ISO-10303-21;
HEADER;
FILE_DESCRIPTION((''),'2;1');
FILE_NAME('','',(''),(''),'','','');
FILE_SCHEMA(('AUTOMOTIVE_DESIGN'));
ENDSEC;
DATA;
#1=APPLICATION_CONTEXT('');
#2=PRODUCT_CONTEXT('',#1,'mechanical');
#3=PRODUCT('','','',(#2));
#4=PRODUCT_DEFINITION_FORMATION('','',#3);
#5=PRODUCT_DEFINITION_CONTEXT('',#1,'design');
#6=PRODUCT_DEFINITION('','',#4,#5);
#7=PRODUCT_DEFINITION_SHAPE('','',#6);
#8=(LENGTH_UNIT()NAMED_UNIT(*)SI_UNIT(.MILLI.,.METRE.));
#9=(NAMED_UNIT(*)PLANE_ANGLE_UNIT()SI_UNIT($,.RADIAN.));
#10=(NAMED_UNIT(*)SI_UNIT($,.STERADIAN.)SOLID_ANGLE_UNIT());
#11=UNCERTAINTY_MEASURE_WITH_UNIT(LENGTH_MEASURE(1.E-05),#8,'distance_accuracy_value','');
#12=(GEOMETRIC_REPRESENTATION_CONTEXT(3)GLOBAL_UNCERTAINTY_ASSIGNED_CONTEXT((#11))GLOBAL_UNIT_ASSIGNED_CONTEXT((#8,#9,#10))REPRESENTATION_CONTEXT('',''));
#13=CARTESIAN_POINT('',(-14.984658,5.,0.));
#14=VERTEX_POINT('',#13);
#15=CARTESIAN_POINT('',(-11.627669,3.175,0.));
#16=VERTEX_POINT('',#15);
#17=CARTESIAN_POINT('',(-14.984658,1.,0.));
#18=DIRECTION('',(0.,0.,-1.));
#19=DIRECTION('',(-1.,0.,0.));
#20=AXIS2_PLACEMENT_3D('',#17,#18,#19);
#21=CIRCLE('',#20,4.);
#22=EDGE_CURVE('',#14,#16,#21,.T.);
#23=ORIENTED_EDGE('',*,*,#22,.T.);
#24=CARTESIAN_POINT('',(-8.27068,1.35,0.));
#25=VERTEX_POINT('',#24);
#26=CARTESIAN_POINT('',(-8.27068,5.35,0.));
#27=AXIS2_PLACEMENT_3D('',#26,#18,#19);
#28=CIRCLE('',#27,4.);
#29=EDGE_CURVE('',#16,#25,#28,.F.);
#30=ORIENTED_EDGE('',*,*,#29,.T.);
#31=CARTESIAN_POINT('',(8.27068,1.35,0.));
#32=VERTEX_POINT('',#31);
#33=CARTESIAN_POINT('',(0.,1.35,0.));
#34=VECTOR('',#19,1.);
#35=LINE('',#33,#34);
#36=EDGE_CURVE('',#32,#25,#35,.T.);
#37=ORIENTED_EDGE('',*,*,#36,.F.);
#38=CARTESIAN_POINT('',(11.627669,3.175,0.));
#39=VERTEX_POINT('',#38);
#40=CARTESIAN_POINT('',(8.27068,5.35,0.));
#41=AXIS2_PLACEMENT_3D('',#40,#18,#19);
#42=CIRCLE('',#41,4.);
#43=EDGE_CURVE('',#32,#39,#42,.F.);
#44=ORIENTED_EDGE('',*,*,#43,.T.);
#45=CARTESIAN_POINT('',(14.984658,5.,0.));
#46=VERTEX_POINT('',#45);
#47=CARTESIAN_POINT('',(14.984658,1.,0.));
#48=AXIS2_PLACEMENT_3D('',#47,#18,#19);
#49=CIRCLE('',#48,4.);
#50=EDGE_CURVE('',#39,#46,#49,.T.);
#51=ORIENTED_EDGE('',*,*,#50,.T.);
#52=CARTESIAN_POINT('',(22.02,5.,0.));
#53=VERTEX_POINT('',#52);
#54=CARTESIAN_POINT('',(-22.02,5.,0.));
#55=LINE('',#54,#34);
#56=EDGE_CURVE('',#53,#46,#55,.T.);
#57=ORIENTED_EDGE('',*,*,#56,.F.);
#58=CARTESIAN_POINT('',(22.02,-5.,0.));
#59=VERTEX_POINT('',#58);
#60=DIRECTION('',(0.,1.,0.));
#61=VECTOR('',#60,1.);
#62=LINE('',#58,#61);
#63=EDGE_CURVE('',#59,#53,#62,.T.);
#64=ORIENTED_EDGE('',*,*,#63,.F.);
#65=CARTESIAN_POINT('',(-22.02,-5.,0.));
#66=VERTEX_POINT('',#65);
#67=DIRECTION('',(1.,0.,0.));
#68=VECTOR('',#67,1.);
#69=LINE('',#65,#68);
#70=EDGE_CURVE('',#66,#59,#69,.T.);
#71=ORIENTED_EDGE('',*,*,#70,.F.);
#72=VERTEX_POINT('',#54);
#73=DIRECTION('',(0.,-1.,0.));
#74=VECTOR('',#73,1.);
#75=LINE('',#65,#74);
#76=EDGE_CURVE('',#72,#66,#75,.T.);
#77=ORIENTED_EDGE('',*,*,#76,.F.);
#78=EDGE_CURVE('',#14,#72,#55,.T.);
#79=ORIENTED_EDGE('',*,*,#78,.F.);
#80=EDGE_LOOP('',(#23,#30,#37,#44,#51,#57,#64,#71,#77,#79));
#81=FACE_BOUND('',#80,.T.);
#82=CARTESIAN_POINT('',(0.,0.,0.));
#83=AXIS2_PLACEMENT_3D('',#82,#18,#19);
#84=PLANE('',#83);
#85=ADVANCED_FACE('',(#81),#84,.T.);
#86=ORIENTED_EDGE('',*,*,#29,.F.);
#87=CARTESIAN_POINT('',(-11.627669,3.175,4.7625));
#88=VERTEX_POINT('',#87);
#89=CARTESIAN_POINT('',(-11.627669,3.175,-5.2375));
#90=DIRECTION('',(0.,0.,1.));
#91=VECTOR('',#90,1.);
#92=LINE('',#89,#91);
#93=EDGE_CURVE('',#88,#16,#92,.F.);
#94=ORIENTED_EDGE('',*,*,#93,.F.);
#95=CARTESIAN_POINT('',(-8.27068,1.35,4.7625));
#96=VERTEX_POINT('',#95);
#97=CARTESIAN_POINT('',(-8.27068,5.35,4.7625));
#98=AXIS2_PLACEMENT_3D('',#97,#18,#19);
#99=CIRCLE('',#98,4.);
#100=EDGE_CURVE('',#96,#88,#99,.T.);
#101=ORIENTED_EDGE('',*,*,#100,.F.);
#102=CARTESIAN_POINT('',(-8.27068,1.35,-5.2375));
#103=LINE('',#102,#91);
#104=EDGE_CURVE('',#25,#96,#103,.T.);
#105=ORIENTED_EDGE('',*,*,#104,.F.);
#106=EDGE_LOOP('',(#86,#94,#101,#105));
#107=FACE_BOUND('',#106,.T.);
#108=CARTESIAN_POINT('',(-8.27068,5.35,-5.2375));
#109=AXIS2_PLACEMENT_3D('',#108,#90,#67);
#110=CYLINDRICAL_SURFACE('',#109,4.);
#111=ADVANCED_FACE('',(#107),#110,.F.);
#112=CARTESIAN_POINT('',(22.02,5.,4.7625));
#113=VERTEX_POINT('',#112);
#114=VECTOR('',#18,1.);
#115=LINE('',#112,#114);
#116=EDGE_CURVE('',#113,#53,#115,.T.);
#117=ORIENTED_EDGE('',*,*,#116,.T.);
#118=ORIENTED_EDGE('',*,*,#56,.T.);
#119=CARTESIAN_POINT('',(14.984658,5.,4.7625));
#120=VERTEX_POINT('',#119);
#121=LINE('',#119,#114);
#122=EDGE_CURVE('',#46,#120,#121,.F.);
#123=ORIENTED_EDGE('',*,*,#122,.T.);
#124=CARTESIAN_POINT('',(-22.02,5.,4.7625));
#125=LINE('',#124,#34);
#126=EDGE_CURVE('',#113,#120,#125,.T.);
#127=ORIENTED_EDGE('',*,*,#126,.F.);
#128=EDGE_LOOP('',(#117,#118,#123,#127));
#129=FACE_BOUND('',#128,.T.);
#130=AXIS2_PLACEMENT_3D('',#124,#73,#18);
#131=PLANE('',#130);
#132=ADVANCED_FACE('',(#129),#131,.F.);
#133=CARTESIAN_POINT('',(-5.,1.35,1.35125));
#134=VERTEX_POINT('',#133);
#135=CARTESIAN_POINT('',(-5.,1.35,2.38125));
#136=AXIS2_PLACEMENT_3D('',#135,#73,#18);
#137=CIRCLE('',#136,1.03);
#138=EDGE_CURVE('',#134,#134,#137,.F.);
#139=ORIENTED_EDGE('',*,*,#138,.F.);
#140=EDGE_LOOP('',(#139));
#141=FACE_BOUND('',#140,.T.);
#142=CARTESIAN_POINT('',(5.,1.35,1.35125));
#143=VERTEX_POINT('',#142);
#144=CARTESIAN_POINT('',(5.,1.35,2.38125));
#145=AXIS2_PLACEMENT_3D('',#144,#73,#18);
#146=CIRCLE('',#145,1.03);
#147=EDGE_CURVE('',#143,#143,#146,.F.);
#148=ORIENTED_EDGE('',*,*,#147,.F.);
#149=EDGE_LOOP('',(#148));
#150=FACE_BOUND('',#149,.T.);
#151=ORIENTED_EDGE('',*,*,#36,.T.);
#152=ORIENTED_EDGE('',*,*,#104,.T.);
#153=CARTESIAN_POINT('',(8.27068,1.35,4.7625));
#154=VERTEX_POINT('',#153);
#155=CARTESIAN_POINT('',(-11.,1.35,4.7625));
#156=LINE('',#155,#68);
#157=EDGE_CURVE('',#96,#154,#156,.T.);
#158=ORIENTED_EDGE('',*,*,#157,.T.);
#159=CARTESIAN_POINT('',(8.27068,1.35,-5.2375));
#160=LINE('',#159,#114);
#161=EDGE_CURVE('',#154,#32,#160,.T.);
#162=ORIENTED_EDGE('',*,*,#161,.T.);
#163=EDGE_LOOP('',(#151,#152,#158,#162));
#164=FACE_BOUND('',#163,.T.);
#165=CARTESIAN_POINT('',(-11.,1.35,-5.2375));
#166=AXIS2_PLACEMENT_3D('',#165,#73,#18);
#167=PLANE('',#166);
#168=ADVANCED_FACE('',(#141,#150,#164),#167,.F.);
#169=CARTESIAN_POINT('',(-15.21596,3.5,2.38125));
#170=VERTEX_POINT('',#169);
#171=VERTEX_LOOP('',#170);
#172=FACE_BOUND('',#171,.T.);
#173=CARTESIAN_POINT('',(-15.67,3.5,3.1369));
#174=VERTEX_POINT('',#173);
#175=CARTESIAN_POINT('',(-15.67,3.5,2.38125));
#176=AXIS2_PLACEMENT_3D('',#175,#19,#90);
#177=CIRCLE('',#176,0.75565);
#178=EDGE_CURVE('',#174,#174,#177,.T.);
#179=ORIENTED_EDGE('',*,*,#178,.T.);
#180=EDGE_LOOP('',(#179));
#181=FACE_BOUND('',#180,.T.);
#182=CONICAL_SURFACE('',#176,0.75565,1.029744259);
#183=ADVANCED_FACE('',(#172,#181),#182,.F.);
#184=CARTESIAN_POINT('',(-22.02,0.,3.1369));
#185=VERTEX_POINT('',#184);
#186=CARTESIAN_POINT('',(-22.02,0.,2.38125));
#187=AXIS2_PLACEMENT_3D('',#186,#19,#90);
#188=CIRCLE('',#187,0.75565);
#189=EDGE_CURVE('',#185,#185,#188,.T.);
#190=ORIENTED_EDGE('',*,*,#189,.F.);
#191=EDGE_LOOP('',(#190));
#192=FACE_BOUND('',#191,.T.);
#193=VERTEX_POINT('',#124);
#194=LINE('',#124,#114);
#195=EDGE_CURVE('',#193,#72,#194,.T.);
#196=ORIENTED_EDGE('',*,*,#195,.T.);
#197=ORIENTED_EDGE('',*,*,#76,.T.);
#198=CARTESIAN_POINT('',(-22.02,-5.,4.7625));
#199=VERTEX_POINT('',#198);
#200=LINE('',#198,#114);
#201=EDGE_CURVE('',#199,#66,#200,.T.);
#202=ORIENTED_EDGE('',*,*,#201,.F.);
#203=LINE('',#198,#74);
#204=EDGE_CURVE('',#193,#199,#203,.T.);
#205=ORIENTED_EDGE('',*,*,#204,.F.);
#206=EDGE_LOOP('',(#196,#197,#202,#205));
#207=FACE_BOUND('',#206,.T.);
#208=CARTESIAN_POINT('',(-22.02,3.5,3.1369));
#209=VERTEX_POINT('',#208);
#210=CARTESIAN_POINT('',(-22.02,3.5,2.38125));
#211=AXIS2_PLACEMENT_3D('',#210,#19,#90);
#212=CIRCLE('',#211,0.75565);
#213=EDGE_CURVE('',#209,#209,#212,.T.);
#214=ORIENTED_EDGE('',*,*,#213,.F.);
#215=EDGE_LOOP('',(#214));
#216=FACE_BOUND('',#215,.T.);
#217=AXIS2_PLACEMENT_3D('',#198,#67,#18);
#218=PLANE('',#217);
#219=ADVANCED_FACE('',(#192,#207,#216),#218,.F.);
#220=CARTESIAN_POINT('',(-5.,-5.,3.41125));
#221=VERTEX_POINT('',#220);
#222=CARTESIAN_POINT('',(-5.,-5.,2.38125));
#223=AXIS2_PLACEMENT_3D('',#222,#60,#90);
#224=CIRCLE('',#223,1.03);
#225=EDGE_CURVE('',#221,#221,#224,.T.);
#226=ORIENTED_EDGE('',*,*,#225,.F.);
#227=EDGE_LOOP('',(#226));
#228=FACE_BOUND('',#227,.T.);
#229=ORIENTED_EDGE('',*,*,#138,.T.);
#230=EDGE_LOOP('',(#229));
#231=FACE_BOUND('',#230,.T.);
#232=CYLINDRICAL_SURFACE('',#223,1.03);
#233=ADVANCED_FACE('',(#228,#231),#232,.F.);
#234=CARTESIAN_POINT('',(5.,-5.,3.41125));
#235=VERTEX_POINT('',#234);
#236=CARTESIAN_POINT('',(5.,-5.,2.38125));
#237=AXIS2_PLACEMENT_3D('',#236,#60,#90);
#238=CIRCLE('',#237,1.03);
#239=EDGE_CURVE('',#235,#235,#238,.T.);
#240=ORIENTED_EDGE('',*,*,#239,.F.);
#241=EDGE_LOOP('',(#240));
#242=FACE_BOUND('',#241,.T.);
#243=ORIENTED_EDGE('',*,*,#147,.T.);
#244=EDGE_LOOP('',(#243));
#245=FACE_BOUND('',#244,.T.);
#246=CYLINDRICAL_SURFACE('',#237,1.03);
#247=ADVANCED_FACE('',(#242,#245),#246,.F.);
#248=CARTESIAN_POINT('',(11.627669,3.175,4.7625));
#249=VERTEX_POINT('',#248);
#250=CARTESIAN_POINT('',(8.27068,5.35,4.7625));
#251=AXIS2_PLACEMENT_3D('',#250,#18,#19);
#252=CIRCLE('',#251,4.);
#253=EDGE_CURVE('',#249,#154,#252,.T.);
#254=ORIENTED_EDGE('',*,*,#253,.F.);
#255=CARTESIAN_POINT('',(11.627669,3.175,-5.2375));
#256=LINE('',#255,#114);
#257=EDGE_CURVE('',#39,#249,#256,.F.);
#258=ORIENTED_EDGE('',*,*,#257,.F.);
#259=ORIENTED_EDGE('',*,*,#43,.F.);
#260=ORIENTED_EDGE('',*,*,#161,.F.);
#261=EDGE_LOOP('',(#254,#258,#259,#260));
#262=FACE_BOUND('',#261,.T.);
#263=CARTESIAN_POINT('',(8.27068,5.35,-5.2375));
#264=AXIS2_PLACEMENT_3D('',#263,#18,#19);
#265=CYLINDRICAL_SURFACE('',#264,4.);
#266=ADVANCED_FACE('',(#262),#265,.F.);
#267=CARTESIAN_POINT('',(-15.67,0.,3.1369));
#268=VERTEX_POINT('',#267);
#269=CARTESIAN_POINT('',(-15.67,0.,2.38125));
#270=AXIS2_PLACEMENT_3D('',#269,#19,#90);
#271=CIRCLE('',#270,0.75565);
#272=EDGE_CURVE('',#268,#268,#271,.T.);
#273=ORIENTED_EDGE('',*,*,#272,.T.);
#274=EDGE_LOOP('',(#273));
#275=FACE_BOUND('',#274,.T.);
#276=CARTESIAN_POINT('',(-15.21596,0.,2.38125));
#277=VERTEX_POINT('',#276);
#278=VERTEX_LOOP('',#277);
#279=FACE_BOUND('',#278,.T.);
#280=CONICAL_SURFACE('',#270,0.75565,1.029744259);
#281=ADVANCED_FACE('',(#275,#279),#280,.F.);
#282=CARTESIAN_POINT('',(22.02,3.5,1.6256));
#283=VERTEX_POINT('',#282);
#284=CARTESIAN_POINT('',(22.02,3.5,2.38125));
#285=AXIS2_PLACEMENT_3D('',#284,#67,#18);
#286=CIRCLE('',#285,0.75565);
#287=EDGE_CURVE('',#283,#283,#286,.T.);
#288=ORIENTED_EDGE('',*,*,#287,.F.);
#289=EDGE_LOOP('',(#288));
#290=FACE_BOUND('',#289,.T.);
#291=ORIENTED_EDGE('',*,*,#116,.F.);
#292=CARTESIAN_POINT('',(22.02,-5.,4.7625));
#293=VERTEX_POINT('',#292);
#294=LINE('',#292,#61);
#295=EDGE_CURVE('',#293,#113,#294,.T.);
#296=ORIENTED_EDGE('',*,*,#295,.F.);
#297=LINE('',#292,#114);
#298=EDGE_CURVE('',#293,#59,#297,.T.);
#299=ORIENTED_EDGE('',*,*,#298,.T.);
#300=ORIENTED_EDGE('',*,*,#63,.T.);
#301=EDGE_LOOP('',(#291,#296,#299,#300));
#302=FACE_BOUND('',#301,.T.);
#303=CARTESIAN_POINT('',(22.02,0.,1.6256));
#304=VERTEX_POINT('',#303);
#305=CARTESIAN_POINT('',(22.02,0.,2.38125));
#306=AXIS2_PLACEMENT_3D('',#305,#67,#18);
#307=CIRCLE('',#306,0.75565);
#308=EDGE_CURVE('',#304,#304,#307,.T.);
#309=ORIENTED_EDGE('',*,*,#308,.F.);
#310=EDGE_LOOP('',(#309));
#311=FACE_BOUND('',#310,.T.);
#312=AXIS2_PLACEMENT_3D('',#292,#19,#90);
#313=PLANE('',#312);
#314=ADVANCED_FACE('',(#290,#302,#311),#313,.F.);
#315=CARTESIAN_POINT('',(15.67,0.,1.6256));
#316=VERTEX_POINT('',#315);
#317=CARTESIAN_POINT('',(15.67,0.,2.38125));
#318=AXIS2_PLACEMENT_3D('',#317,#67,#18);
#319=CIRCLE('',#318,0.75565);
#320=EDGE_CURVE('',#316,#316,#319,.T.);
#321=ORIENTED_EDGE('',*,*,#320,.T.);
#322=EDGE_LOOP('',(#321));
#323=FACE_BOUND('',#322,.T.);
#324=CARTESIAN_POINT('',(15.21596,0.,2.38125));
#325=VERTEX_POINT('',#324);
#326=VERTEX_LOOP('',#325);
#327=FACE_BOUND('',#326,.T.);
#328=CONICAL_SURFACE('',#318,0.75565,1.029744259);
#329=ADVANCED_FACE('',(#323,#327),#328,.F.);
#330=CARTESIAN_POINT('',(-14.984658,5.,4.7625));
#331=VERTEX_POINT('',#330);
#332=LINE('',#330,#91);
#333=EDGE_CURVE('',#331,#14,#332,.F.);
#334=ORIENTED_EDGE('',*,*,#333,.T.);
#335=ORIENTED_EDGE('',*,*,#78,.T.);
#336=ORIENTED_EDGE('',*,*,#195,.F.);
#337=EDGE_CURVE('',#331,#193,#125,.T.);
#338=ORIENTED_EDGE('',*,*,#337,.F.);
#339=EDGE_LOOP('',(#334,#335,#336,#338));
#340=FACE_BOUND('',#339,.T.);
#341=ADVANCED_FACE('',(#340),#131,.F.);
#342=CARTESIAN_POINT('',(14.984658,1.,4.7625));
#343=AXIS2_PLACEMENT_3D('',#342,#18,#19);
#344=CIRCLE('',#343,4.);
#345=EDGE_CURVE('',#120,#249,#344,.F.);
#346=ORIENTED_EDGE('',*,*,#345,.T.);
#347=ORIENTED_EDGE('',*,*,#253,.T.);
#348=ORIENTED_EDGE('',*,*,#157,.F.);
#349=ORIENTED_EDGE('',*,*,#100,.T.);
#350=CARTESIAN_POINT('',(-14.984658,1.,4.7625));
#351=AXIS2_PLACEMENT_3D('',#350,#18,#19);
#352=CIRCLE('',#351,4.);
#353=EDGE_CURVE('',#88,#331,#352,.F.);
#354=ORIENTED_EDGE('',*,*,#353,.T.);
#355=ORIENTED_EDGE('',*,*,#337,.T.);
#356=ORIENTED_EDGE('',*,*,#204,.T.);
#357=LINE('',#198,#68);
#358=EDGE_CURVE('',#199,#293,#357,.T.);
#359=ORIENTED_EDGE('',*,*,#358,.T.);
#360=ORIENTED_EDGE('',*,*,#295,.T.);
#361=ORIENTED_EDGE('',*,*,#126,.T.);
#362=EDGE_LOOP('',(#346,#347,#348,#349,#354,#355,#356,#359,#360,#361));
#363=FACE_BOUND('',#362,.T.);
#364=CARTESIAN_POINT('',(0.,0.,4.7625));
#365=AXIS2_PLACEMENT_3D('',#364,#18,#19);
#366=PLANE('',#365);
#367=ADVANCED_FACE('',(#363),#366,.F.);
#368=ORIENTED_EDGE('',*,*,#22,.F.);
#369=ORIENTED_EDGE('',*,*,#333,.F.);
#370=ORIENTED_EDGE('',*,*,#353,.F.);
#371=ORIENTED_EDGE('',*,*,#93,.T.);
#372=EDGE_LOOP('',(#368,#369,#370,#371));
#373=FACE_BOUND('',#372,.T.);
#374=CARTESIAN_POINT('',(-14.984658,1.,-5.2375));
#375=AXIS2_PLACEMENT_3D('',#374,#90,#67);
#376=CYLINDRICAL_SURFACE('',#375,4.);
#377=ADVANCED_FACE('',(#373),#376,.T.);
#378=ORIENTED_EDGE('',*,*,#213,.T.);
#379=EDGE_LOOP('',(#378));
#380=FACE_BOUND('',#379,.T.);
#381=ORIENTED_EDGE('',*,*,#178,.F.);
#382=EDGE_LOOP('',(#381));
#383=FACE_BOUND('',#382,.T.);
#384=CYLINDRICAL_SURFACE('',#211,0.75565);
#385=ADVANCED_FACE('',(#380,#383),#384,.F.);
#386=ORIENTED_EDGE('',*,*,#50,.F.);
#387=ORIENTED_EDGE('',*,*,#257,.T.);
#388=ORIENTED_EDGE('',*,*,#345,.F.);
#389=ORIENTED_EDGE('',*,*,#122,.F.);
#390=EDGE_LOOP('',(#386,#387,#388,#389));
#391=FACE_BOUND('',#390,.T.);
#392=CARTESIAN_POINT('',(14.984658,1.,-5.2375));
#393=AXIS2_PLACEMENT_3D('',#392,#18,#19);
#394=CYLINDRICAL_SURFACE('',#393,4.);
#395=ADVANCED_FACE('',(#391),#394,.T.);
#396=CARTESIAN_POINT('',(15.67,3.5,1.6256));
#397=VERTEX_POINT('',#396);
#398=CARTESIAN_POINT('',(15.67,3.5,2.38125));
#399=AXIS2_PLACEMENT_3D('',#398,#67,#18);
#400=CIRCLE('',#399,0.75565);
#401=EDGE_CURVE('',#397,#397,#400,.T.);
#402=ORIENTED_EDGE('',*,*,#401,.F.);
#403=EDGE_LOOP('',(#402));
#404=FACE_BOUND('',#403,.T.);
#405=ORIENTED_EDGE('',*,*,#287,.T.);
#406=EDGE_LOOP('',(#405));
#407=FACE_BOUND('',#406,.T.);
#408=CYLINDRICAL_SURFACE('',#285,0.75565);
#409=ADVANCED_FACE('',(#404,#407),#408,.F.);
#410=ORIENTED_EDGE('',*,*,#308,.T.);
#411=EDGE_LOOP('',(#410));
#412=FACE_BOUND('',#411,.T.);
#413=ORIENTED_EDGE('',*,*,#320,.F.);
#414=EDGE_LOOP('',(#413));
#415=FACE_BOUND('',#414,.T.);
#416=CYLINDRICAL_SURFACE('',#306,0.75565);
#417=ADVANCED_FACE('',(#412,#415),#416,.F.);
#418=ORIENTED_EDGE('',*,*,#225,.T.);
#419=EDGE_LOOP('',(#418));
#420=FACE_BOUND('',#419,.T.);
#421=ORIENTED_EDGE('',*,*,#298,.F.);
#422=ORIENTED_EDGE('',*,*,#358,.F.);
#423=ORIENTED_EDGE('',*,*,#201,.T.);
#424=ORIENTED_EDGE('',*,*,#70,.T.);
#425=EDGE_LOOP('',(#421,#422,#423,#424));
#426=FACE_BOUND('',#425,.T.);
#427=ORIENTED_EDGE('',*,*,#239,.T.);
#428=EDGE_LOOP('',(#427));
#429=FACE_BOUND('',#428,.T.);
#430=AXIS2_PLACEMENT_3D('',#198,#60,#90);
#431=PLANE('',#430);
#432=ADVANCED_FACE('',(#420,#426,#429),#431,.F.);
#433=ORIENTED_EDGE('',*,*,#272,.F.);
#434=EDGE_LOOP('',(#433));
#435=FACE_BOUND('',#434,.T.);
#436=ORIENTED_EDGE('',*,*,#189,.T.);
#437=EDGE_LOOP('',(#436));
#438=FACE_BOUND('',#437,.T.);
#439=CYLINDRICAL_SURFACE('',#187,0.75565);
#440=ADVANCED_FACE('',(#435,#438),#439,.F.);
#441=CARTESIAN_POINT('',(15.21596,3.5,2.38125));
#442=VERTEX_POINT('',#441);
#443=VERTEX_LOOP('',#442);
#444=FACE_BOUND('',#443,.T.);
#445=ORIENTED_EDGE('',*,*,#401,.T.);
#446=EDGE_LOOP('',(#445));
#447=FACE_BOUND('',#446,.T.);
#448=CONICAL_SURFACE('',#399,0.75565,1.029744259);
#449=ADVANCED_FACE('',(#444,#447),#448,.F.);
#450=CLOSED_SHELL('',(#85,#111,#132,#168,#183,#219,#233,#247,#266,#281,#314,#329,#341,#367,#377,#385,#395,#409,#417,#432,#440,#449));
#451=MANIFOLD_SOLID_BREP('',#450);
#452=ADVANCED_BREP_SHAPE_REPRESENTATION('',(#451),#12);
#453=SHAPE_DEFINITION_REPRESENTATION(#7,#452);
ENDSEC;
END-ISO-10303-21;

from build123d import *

# Parameters (mm, degrees)
SKETCH1_W                 = 44.04
SKETCH1_H                 = 10
BOSS_EXTRUDE1_DEPTH       = 4.7625
SKETCH2_R                 = 1.03
CUT_EXTRUDE1_DEPTH        = 25.648768859
F_1_64_TAPPED_HOLE1_D     = 1.5113
F_1_64_TAPPED_HOLE1_DEPTH = 6.35
F_1_64_TAPPED_HOLE1_TIP   = 0.454040327
F_1_64_TAPPED_HOLE2_D     = 1.5113
F_1_64_TAPPED_HOLE2_DEPTH = 6.35
F_1_64_TAPPED_HOLE2_TIP   = 0.454040327
SKETCH7_W                 = 22
SKETCH7_H                 = 3.65
CUT_EXTRUDE2_DEPTH        = 10
FILLET1_R                 = 4
FILLET2_R                 = 4


with BuildPart() as part:
    # Sketch1 → Boss-Extrude1 (new body)
    with BuildSketch(Plane.XY):
        Rectangle(SKETCH1_W, SKETCH1_H)
    extrude(amount=BOSS_EXTRUDE1_DEPTH)

    # Sketch2 → Cut-Extrude1 (cut, through all)
    with BuildSketch(Plane(origin=(0, 5, 0), x_dir=(1, 0, 0), z_dir=(0, 1, 0))):
        with Locations(Location((-5, -2.38125, 0), (0, 0, 270))):
            Circle(SKETCH2_R)
        with Locations(Location((5, -2.38125, 0), (0, 0, 270))):
            Circle(SKETCH2_R)
    extrude(amount=-CUT_EXTRUDE1_DEPTH, mode=Mode.SUBTRACT)

    # #1-64 Tapped Hole1
    with Locations(Plane.ZY.offset(22.02)):
        with Locations((2.38125, 3.5), (2.38125, 0)):
            Hole(F_1_64_TAPPED_HOLE1_D / 2, depth=F_1_64_TAPPED_HOLE1_DEPTH)
            with Locations((0, 0, -(F_1_64_TAPPED_HOLE1_DEPTH + F_1_64_TAPPED_HOLE1_TIP / 2))):  # 118° drill point
                Cone(0, F_1_64_TAPPED_HOLE1_D / 2, F_1_64_TAPPED_HOLE1_TIP, mode=Mode.SUBTRACT)

    # #1-64 Tapped Hole2
    with Locations(Plane(origin=(22.02, 0, 0), x_dir=(0, 0, -1), z_dir=(1, 0, 0))):
        with Locations((-2.38125, 3.5), (-2.38125, 0)):
            Hole(F_1_64_TAPPED_HOLE2_D / 2, depth=F_1_64_TAPPED_HOLE2_DEPTH)
            with Locations((0, 0, -(F_1_64_TAPPED_HOLE2_DEPTH + F_1_64_TAPPED_HOLE2_TIP / 2))):  # 118° drill point
                Cone(0, F_1_64_TAPPED_HOLE2_D / 2, F_1_64_TAPPED_HOLE2_TIP, mode=Mode.SUBTRACT)

    # Sketch7 → Cut-Extrude2 (cut)
    with BuildSketch(Plane.XY.offset(4.7625)):
        with Locations((0, 3.175)):
            Rectangle(SKETCH7_W, SKETCH7_H)
    extrude(amount=-CUT_EXTRUDE2_DEPTH, mode=Mode.SUBTRACT)

    # Fillet1
    # the kernel refuses this fillet: 4 mm, written as the material it takes off along each edge
    with BuildSketch(Plane(origin=(11, 5, 14.724145195), x_dir=(0, -1, 0), z_dir=(0, 0, -1))) as fillet1_piece_1:
        with BuildLine():
            CenterArc((4, -3.984658078), FILLET1_R, 95.019800132, 84.980199868)
            Line((0, -3.984658078), (-0.08, -3.984658078))
            Line((-0.08, -3.984658078), (-0.08, 0))
            Line((-0.08, 0), (0, 0.08))
            ThreePointArc((0, 0.08), (1.825, 0.08), (3.643, 0.079693162))
            Line((3.643, 0.079693162), (3.65, 0))
        make_face()
    extrude(amount=24.685790391, mode=Mode.SUBTRACT)
    with BuildSketch(Plane(origin=(-11, 5, 14.724145195), x_dir=(-1, 0, 0), z_dir=(0, 0, -1))) as fillet1_piece_2:
        with BuildLine():
            CenterArc((3.984658078, -4), FILLET1_R, 90, 84.980199868)
            Line((0, -3.65), (-0.079693162, -3.643))
            ThreePointArc((-0.079693162, -3.643), (-0.08, -1.825), (-0.08, 0))
            Line((-0.08, 0), (0, 0.08))
            Line((0, 0.08), (3.984658078, 0.08))
            Line((3.984658078, 0.08), (3.984658078, 0))
        make_face()
    extrude(amount=24.685790391, mode=Mode.SUBTRACT)

    # Fillet2
    fillet2_edges = [part.edges().sort_by_distance(p)[0] for p in [
        (11, 1.35, 2.38125),
        (-11, 1.35, 2.38125),
    ]]
    fillet(fillet2_edges, radius=FILLET2_R)


solid = part.part
